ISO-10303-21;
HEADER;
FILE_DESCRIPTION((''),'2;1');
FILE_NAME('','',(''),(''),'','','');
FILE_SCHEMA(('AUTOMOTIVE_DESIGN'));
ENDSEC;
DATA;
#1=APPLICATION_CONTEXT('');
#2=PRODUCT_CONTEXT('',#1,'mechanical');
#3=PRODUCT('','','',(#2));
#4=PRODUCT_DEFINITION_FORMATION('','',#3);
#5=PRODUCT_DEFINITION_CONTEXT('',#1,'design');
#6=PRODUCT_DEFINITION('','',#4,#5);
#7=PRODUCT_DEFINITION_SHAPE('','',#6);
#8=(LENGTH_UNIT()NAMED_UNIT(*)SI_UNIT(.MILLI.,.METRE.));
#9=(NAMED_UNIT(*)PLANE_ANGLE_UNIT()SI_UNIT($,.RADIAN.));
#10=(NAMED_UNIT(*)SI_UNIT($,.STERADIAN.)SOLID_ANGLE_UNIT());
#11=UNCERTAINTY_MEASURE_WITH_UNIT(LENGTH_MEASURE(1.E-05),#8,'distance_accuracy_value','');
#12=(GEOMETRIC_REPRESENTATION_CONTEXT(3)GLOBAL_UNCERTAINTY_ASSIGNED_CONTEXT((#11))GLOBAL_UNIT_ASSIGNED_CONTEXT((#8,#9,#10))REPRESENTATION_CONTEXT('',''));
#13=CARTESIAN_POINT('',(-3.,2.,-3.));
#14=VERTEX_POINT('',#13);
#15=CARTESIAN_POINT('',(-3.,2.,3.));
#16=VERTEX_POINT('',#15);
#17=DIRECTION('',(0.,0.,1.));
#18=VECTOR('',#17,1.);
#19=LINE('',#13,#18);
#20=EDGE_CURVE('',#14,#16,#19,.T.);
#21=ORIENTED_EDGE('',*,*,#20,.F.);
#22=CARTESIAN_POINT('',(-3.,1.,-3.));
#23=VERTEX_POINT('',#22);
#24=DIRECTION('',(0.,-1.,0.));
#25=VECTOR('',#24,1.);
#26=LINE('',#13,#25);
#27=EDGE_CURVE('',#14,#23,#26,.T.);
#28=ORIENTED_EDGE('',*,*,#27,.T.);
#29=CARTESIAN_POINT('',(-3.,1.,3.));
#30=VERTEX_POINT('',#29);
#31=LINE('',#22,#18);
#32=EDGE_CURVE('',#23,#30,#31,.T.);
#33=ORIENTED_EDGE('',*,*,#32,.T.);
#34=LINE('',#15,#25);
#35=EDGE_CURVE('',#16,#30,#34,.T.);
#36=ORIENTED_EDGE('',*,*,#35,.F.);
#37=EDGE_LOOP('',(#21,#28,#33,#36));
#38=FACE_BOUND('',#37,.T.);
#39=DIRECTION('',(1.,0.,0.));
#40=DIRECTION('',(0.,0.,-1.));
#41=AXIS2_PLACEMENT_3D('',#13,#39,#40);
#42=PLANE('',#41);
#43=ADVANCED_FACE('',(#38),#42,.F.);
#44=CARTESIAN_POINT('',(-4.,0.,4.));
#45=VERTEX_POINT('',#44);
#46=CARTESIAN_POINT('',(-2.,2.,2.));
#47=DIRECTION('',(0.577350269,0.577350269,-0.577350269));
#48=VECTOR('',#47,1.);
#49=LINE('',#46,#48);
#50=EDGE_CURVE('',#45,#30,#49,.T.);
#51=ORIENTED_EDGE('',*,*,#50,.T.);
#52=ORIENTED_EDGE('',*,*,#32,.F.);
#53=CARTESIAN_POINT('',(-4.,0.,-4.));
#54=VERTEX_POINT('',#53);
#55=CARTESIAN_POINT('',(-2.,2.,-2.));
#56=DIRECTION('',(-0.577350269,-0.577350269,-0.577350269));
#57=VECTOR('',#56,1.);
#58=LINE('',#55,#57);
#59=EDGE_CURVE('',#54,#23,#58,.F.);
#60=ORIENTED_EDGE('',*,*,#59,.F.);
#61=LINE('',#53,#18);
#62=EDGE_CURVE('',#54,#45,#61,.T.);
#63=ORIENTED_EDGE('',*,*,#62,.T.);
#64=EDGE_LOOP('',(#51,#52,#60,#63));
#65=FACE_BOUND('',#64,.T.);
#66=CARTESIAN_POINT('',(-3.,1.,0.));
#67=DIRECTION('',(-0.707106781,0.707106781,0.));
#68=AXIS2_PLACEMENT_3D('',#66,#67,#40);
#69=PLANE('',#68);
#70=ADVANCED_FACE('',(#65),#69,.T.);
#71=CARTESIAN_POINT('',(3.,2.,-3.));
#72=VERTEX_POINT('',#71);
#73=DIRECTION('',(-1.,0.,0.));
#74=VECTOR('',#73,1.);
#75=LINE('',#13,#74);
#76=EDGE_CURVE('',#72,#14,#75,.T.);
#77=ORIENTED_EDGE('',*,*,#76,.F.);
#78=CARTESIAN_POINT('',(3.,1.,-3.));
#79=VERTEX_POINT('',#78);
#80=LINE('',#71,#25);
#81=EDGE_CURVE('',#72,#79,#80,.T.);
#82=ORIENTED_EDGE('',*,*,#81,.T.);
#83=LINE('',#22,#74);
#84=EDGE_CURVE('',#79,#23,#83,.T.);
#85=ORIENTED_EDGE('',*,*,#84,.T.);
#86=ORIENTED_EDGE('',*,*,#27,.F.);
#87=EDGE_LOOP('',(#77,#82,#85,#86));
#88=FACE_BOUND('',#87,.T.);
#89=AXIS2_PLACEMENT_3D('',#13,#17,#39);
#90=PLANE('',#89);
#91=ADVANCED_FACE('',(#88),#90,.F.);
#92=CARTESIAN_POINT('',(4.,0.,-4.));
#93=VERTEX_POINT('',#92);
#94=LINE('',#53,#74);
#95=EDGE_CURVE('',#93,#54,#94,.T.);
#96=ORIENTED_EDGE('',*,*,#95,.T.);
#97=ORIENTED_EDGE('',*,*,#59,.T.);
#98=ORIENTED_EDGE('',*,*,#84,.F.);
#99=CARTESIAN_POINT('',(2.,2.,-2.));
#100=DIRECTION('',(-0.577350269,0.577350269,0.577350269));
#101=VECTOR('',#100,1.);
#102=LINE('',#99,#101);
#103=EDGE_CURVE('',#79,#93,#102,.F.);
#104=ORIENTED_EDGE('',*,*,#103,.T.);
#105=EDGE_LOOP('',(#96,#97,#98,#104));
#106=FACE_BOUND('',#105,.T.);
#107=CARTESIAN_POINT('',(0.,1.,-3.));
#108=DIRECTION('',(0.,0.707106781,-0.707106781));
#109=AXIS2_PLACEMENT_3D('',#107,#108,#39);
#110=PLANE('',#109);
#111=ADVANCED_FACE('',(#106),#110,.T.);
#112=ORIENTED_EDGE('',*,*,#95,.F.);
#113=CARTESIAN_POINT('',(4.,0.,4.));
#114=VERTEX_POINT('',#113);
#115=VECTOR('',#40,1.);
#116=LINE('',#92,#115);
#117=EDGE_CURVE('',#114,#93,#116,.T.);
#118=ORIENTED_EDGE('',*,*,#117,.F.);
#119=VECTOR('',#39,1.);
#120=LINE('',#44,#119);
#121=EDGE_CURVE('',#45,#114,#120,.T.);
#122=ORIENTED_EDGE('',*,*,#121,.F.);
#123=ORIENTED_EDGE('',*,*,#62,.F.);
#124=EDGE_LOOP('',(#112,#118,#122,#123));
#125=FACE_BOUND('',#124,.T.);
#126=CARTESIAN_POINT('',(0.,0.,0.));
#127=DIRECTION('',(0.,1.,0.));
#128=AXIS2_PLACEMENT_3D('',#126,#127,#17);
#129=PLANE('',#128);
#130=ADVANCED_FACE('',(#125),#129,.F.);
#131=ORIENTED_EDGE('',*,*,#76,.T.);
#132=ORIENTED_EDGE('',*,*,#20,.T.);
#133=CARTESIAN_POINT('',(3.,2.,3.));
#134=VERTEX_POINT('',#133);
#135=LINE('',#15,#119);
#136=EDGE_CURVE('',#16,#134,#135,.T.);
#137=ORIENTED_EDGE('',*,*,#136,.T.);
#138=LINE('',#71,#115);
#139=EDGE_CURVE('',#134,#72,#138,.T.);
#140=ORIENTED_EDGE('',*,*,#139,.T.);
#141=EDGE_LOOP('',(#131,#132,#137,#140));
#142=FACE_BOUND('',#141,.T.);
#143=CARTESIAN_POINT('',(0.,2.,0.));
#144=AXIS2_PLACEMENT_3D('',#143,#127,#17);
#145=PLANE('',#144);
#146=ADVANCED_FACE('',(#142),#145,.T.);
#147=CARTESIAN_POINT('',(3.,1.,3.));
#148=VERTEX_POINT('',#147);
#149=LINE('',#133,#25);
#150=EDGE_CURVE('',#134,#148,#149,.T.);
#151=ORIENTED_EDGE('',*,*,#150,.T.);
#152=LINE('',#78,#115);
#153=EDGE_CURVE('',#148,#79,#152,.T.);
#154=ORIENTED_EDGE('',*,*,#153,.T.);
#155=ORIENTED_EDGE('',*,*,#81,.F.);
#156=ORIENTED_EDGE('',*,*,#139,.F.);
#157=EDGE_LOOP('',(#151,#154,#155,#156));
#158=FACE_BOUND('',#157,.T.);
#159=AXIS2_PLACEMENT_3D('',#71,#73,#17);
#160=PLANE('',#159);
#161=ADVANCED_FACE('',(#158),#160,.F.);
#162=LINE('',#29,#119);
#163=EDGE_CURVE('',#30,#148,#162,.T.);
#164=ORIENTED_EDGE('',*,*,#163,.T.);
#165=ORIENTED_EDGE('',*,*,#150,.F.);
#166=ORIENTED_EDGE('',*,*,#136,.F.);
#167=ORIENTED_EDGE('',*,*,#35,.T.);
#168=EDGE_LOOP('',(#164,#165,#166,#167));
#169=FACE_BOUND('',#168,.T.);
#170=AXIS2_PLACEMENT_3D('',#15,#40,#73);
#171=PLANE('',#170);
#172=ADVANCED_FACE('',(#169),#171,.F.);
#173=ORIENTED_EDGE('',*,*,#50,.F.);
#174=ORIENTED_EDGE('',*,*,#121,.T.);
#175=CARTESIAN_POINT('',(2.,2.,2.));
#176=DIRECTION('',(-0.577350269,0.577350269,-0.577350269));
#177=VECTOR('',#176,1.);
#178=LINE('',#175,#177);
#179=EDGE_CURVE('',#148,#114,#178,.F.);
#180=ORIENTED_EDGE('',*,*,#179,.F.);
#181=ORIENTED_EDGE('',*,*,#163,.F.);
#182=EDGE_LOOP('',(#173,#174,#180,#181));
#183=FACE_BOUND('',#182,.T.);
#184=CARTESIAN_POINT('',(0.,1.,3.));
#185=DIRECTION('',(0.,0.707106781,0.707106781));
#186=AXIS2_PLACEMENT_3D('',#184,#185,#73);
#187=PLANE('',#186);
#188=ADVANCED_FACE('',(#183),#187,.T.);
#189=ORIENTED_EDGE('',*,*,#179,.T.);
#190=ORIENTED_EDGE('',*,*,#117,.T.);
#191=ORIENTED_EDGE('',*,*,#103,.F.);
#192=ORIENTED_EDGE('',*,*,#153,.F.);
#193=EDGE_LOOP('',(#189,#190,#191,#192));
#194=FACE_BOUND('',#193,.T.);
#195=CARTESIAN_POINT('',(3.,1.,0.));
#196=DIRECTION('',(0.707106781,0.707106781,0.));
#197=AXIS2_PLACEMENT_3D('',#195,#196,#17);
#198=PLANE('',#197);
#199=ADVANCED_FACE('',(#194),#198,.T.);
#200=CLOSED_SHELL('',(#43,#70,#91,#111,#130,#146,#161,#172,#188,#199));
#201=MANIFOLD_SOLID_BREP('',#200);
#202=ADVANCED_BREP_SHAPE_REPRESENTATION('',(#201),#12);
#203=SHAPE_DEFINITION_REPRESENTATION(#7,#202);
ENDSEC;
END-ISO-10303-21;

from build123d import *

# Parameters (mm, degrees)
SKETCH_1_W      = 6
SKETCH_1_H      = 6
EXTRUDE_1_DEPTH = 2
SKETCH_3_W      = 8
SKETCH_3_H      = 8
EXTRUDE_2_DEPTH = 1
CHAMFER_1_SIZE  = 1


with BuildPart() as part:
    # 草图1 → 凸台-拉伸1 (new body)
    with BuildSketch(Plane(origin=(0, 0, 0), x_dir=(1, 0, 0), z_dir=(0, 1, 0))):
        Rectangle(SKETCH_1_W, SKETCH_1_H)
    extrude(amount=EXTRUDE_1_DEPTH)

    # 草图3 → 凸台-拉伸2 (add)
    with BuildSketch(Plane(origin=(0, 0, 0), x_dir=(1, 0, 0), z_dir=(0, 1, 0))):
        Rectangle(SKETCH_3_W, SKETCH_3_H)
    extrude(amount=EXTRUDE_2_DEPTH)

    # 倒角1
    chamfer_1_edges = [part.edges().sort_by_distance(p)[0] for p in [
        (0, 1, -4),
        (4, 1, 0),
        (0, 1, 4),
        (-4, 1, 0),
    ]]
    chamfer(chamfer_1_edges, length=CHAMFER_1_SIZE - 0.0001)  # a hair under: the kernel refuses the full size


solid = part.part
